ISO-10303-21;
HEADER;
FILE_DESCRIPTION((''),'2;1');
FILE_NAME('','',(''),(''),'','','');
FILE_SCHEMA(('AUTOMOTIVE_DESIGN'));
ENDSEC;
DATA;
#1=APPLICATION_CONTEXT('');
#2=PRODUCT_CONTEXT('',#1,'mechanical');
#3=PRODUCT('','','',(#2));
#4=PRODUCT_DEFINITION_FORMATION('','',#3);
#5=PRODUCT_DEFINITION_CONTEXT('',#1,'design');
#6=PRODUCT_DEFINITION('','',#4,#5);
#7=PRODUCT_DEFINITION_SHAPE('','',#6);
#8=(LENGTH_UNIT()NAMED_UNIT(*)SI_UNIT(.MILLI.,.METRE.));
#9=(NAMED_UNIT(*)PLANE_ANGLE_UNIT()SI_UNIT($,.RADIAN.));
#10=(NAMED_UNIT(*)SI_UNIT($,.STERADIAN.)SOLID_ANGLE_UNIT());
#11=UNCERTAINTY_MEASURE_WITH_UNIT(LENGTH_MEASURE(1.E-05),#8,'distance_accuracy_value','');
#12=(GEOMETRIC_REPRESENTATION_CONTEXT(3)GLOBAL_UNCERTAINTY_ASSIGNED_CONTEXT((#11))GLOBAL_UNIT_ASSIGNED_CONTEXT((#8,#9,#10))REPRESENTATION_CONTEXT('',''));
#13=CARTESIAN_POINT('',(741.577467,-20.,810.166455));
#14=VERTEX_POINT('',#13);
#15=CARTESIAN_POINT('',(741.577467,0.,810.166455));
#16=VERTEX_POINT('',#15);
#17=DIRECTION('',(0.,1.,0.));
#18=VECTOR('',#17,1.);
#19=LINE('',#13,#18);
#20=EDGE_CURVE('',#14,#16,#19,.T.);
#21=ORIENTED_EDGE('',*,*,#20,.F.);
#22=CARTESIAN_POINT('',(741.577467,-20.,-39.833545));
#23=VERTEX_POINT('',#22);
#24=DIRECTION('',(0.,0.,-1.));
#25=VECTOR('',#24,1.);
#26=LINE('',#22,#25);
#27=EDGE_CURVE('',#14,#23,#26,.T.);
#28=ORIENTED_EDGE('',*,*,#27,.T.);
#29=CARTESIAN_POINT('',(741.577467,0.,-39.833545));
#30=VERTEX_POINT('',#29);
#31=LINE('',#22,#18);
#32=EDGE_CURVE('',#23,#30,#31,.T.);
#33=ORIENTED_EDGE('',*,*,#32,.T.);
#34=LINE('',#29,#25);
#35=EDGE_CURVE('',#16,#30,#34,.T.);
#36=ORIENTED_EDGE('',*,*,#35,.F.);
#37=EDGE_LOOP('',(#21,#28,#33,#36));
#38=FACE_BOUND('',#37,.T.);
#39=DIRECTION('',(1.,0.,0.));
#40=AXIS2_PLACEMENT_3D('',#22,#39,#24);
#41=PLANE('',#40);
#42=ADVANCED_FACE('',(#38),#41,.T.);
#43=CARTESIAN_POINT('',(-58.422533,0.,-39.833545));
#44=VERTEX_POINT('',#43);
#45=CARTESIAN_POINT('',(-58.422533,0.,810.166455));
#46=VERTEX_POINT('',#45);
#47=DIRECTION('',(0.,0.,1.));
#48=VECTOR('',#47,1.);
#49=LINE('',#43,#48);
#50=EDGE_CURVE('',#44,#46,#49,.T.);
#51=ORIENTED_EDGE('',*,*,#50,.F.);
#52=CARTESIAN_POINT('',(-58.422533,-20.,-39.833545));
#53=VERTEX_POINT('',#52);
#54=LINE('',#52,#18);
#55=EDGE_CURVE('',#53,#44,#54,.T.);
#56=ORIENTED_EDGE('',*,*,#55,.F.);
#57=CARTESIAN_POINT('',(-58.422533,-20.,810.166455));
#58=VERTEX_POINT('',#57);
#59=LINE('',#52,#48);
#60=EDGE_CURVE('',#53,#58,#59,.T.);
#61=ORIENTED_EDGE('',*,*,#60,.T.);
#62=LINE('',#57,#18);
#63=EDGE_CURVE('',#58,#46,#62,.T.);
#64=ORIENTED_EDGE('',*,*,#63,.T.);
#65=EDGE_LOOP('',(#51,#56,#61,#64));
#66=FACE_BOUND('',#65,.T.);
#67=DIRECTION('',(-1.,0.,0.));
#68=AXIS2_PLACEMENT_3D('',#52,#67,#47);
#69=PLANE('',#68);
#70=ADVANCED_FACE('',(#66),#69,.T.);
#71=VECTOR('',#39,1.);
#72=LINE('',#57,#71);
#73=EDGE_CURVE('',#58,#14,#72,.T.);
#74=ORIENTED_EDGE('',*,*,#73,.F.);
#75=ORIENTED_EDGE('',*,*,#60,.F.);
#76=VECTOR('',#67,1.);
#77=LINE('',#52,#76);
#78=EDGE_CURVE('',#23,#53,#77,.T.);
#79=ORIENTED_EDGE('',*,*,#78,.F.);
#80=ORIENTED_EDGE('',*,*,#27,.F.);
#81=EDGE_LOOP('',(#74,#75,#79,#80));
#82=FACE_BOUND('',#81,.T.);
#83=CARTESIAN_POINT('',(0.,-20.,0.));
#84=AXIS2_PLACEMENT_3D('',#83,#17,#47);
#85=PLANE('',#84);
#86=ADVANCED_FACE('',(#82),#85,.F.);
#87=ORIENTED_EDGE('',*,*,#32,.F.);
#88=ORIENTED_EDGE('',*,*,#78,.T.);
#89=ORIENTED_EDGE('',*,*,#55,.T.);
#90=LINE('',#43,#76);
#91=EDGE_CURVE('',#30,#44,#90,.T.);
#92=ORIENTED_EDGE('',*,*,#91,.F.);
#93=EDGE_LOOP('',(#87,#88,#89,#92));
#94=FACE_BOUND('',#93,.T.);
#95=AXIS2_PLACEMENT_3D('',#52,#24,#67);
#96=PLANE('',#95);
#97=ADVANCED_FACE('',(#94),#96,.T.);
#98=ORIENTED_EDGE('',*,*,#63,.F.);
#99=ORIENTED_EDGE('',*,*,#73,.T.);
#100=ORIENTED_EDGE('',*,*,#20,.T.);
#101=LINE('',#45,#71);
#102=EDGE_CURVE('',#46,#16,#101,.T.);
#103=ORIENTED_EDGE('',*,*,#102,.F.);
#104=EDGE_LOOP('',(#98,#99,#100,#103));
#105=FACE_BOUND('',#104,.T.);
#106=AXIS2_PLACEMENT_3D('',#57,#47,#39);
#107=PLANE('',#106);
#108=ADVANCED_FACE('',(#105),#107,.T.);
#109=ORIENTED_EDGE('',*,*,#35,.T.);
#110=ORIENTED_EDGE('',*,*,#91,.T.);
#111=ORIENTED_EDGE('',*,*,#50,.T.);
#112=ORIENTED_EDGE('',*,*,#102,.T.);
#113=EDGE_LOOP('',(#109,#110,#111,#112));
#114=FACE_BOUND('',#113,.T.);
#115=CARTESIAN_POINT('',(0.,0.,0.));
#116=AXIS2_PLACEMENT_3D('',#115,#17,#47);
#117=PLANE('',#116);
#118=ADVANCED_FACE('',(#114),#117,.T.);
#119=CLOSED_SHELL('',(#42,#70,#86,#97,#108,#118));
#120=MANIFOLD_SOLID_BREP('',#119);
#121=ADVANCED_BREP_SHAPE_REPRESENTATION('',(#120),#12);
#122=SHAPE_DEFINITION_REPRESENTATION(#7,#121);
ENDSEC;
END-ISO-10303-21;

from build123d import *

# Parameters (mm, degrees)
SKETCH_1_W             = 800
SKETCH_1_H             = 850
SM_BASE_FLANGE_1_DEPTH = 20


# Sheet-metal steps are written as plain solids
with BuildPart() as part:
    # Sketch 1 → Базовая кромка1 (new body)
    with BuildSketch(Plane(origin=(0, 0, 0), x_dir=(1, 0, 0), z_dir=(0, 1, 0))):
        with Locations((341.577466865, -385.166454681)):
            Rectangle(SKETCH_1_W, SKETCH_1_H)
    extrude(amount=-SM_BASE_FLANGE_1_DEPTH)


solid = part.part
